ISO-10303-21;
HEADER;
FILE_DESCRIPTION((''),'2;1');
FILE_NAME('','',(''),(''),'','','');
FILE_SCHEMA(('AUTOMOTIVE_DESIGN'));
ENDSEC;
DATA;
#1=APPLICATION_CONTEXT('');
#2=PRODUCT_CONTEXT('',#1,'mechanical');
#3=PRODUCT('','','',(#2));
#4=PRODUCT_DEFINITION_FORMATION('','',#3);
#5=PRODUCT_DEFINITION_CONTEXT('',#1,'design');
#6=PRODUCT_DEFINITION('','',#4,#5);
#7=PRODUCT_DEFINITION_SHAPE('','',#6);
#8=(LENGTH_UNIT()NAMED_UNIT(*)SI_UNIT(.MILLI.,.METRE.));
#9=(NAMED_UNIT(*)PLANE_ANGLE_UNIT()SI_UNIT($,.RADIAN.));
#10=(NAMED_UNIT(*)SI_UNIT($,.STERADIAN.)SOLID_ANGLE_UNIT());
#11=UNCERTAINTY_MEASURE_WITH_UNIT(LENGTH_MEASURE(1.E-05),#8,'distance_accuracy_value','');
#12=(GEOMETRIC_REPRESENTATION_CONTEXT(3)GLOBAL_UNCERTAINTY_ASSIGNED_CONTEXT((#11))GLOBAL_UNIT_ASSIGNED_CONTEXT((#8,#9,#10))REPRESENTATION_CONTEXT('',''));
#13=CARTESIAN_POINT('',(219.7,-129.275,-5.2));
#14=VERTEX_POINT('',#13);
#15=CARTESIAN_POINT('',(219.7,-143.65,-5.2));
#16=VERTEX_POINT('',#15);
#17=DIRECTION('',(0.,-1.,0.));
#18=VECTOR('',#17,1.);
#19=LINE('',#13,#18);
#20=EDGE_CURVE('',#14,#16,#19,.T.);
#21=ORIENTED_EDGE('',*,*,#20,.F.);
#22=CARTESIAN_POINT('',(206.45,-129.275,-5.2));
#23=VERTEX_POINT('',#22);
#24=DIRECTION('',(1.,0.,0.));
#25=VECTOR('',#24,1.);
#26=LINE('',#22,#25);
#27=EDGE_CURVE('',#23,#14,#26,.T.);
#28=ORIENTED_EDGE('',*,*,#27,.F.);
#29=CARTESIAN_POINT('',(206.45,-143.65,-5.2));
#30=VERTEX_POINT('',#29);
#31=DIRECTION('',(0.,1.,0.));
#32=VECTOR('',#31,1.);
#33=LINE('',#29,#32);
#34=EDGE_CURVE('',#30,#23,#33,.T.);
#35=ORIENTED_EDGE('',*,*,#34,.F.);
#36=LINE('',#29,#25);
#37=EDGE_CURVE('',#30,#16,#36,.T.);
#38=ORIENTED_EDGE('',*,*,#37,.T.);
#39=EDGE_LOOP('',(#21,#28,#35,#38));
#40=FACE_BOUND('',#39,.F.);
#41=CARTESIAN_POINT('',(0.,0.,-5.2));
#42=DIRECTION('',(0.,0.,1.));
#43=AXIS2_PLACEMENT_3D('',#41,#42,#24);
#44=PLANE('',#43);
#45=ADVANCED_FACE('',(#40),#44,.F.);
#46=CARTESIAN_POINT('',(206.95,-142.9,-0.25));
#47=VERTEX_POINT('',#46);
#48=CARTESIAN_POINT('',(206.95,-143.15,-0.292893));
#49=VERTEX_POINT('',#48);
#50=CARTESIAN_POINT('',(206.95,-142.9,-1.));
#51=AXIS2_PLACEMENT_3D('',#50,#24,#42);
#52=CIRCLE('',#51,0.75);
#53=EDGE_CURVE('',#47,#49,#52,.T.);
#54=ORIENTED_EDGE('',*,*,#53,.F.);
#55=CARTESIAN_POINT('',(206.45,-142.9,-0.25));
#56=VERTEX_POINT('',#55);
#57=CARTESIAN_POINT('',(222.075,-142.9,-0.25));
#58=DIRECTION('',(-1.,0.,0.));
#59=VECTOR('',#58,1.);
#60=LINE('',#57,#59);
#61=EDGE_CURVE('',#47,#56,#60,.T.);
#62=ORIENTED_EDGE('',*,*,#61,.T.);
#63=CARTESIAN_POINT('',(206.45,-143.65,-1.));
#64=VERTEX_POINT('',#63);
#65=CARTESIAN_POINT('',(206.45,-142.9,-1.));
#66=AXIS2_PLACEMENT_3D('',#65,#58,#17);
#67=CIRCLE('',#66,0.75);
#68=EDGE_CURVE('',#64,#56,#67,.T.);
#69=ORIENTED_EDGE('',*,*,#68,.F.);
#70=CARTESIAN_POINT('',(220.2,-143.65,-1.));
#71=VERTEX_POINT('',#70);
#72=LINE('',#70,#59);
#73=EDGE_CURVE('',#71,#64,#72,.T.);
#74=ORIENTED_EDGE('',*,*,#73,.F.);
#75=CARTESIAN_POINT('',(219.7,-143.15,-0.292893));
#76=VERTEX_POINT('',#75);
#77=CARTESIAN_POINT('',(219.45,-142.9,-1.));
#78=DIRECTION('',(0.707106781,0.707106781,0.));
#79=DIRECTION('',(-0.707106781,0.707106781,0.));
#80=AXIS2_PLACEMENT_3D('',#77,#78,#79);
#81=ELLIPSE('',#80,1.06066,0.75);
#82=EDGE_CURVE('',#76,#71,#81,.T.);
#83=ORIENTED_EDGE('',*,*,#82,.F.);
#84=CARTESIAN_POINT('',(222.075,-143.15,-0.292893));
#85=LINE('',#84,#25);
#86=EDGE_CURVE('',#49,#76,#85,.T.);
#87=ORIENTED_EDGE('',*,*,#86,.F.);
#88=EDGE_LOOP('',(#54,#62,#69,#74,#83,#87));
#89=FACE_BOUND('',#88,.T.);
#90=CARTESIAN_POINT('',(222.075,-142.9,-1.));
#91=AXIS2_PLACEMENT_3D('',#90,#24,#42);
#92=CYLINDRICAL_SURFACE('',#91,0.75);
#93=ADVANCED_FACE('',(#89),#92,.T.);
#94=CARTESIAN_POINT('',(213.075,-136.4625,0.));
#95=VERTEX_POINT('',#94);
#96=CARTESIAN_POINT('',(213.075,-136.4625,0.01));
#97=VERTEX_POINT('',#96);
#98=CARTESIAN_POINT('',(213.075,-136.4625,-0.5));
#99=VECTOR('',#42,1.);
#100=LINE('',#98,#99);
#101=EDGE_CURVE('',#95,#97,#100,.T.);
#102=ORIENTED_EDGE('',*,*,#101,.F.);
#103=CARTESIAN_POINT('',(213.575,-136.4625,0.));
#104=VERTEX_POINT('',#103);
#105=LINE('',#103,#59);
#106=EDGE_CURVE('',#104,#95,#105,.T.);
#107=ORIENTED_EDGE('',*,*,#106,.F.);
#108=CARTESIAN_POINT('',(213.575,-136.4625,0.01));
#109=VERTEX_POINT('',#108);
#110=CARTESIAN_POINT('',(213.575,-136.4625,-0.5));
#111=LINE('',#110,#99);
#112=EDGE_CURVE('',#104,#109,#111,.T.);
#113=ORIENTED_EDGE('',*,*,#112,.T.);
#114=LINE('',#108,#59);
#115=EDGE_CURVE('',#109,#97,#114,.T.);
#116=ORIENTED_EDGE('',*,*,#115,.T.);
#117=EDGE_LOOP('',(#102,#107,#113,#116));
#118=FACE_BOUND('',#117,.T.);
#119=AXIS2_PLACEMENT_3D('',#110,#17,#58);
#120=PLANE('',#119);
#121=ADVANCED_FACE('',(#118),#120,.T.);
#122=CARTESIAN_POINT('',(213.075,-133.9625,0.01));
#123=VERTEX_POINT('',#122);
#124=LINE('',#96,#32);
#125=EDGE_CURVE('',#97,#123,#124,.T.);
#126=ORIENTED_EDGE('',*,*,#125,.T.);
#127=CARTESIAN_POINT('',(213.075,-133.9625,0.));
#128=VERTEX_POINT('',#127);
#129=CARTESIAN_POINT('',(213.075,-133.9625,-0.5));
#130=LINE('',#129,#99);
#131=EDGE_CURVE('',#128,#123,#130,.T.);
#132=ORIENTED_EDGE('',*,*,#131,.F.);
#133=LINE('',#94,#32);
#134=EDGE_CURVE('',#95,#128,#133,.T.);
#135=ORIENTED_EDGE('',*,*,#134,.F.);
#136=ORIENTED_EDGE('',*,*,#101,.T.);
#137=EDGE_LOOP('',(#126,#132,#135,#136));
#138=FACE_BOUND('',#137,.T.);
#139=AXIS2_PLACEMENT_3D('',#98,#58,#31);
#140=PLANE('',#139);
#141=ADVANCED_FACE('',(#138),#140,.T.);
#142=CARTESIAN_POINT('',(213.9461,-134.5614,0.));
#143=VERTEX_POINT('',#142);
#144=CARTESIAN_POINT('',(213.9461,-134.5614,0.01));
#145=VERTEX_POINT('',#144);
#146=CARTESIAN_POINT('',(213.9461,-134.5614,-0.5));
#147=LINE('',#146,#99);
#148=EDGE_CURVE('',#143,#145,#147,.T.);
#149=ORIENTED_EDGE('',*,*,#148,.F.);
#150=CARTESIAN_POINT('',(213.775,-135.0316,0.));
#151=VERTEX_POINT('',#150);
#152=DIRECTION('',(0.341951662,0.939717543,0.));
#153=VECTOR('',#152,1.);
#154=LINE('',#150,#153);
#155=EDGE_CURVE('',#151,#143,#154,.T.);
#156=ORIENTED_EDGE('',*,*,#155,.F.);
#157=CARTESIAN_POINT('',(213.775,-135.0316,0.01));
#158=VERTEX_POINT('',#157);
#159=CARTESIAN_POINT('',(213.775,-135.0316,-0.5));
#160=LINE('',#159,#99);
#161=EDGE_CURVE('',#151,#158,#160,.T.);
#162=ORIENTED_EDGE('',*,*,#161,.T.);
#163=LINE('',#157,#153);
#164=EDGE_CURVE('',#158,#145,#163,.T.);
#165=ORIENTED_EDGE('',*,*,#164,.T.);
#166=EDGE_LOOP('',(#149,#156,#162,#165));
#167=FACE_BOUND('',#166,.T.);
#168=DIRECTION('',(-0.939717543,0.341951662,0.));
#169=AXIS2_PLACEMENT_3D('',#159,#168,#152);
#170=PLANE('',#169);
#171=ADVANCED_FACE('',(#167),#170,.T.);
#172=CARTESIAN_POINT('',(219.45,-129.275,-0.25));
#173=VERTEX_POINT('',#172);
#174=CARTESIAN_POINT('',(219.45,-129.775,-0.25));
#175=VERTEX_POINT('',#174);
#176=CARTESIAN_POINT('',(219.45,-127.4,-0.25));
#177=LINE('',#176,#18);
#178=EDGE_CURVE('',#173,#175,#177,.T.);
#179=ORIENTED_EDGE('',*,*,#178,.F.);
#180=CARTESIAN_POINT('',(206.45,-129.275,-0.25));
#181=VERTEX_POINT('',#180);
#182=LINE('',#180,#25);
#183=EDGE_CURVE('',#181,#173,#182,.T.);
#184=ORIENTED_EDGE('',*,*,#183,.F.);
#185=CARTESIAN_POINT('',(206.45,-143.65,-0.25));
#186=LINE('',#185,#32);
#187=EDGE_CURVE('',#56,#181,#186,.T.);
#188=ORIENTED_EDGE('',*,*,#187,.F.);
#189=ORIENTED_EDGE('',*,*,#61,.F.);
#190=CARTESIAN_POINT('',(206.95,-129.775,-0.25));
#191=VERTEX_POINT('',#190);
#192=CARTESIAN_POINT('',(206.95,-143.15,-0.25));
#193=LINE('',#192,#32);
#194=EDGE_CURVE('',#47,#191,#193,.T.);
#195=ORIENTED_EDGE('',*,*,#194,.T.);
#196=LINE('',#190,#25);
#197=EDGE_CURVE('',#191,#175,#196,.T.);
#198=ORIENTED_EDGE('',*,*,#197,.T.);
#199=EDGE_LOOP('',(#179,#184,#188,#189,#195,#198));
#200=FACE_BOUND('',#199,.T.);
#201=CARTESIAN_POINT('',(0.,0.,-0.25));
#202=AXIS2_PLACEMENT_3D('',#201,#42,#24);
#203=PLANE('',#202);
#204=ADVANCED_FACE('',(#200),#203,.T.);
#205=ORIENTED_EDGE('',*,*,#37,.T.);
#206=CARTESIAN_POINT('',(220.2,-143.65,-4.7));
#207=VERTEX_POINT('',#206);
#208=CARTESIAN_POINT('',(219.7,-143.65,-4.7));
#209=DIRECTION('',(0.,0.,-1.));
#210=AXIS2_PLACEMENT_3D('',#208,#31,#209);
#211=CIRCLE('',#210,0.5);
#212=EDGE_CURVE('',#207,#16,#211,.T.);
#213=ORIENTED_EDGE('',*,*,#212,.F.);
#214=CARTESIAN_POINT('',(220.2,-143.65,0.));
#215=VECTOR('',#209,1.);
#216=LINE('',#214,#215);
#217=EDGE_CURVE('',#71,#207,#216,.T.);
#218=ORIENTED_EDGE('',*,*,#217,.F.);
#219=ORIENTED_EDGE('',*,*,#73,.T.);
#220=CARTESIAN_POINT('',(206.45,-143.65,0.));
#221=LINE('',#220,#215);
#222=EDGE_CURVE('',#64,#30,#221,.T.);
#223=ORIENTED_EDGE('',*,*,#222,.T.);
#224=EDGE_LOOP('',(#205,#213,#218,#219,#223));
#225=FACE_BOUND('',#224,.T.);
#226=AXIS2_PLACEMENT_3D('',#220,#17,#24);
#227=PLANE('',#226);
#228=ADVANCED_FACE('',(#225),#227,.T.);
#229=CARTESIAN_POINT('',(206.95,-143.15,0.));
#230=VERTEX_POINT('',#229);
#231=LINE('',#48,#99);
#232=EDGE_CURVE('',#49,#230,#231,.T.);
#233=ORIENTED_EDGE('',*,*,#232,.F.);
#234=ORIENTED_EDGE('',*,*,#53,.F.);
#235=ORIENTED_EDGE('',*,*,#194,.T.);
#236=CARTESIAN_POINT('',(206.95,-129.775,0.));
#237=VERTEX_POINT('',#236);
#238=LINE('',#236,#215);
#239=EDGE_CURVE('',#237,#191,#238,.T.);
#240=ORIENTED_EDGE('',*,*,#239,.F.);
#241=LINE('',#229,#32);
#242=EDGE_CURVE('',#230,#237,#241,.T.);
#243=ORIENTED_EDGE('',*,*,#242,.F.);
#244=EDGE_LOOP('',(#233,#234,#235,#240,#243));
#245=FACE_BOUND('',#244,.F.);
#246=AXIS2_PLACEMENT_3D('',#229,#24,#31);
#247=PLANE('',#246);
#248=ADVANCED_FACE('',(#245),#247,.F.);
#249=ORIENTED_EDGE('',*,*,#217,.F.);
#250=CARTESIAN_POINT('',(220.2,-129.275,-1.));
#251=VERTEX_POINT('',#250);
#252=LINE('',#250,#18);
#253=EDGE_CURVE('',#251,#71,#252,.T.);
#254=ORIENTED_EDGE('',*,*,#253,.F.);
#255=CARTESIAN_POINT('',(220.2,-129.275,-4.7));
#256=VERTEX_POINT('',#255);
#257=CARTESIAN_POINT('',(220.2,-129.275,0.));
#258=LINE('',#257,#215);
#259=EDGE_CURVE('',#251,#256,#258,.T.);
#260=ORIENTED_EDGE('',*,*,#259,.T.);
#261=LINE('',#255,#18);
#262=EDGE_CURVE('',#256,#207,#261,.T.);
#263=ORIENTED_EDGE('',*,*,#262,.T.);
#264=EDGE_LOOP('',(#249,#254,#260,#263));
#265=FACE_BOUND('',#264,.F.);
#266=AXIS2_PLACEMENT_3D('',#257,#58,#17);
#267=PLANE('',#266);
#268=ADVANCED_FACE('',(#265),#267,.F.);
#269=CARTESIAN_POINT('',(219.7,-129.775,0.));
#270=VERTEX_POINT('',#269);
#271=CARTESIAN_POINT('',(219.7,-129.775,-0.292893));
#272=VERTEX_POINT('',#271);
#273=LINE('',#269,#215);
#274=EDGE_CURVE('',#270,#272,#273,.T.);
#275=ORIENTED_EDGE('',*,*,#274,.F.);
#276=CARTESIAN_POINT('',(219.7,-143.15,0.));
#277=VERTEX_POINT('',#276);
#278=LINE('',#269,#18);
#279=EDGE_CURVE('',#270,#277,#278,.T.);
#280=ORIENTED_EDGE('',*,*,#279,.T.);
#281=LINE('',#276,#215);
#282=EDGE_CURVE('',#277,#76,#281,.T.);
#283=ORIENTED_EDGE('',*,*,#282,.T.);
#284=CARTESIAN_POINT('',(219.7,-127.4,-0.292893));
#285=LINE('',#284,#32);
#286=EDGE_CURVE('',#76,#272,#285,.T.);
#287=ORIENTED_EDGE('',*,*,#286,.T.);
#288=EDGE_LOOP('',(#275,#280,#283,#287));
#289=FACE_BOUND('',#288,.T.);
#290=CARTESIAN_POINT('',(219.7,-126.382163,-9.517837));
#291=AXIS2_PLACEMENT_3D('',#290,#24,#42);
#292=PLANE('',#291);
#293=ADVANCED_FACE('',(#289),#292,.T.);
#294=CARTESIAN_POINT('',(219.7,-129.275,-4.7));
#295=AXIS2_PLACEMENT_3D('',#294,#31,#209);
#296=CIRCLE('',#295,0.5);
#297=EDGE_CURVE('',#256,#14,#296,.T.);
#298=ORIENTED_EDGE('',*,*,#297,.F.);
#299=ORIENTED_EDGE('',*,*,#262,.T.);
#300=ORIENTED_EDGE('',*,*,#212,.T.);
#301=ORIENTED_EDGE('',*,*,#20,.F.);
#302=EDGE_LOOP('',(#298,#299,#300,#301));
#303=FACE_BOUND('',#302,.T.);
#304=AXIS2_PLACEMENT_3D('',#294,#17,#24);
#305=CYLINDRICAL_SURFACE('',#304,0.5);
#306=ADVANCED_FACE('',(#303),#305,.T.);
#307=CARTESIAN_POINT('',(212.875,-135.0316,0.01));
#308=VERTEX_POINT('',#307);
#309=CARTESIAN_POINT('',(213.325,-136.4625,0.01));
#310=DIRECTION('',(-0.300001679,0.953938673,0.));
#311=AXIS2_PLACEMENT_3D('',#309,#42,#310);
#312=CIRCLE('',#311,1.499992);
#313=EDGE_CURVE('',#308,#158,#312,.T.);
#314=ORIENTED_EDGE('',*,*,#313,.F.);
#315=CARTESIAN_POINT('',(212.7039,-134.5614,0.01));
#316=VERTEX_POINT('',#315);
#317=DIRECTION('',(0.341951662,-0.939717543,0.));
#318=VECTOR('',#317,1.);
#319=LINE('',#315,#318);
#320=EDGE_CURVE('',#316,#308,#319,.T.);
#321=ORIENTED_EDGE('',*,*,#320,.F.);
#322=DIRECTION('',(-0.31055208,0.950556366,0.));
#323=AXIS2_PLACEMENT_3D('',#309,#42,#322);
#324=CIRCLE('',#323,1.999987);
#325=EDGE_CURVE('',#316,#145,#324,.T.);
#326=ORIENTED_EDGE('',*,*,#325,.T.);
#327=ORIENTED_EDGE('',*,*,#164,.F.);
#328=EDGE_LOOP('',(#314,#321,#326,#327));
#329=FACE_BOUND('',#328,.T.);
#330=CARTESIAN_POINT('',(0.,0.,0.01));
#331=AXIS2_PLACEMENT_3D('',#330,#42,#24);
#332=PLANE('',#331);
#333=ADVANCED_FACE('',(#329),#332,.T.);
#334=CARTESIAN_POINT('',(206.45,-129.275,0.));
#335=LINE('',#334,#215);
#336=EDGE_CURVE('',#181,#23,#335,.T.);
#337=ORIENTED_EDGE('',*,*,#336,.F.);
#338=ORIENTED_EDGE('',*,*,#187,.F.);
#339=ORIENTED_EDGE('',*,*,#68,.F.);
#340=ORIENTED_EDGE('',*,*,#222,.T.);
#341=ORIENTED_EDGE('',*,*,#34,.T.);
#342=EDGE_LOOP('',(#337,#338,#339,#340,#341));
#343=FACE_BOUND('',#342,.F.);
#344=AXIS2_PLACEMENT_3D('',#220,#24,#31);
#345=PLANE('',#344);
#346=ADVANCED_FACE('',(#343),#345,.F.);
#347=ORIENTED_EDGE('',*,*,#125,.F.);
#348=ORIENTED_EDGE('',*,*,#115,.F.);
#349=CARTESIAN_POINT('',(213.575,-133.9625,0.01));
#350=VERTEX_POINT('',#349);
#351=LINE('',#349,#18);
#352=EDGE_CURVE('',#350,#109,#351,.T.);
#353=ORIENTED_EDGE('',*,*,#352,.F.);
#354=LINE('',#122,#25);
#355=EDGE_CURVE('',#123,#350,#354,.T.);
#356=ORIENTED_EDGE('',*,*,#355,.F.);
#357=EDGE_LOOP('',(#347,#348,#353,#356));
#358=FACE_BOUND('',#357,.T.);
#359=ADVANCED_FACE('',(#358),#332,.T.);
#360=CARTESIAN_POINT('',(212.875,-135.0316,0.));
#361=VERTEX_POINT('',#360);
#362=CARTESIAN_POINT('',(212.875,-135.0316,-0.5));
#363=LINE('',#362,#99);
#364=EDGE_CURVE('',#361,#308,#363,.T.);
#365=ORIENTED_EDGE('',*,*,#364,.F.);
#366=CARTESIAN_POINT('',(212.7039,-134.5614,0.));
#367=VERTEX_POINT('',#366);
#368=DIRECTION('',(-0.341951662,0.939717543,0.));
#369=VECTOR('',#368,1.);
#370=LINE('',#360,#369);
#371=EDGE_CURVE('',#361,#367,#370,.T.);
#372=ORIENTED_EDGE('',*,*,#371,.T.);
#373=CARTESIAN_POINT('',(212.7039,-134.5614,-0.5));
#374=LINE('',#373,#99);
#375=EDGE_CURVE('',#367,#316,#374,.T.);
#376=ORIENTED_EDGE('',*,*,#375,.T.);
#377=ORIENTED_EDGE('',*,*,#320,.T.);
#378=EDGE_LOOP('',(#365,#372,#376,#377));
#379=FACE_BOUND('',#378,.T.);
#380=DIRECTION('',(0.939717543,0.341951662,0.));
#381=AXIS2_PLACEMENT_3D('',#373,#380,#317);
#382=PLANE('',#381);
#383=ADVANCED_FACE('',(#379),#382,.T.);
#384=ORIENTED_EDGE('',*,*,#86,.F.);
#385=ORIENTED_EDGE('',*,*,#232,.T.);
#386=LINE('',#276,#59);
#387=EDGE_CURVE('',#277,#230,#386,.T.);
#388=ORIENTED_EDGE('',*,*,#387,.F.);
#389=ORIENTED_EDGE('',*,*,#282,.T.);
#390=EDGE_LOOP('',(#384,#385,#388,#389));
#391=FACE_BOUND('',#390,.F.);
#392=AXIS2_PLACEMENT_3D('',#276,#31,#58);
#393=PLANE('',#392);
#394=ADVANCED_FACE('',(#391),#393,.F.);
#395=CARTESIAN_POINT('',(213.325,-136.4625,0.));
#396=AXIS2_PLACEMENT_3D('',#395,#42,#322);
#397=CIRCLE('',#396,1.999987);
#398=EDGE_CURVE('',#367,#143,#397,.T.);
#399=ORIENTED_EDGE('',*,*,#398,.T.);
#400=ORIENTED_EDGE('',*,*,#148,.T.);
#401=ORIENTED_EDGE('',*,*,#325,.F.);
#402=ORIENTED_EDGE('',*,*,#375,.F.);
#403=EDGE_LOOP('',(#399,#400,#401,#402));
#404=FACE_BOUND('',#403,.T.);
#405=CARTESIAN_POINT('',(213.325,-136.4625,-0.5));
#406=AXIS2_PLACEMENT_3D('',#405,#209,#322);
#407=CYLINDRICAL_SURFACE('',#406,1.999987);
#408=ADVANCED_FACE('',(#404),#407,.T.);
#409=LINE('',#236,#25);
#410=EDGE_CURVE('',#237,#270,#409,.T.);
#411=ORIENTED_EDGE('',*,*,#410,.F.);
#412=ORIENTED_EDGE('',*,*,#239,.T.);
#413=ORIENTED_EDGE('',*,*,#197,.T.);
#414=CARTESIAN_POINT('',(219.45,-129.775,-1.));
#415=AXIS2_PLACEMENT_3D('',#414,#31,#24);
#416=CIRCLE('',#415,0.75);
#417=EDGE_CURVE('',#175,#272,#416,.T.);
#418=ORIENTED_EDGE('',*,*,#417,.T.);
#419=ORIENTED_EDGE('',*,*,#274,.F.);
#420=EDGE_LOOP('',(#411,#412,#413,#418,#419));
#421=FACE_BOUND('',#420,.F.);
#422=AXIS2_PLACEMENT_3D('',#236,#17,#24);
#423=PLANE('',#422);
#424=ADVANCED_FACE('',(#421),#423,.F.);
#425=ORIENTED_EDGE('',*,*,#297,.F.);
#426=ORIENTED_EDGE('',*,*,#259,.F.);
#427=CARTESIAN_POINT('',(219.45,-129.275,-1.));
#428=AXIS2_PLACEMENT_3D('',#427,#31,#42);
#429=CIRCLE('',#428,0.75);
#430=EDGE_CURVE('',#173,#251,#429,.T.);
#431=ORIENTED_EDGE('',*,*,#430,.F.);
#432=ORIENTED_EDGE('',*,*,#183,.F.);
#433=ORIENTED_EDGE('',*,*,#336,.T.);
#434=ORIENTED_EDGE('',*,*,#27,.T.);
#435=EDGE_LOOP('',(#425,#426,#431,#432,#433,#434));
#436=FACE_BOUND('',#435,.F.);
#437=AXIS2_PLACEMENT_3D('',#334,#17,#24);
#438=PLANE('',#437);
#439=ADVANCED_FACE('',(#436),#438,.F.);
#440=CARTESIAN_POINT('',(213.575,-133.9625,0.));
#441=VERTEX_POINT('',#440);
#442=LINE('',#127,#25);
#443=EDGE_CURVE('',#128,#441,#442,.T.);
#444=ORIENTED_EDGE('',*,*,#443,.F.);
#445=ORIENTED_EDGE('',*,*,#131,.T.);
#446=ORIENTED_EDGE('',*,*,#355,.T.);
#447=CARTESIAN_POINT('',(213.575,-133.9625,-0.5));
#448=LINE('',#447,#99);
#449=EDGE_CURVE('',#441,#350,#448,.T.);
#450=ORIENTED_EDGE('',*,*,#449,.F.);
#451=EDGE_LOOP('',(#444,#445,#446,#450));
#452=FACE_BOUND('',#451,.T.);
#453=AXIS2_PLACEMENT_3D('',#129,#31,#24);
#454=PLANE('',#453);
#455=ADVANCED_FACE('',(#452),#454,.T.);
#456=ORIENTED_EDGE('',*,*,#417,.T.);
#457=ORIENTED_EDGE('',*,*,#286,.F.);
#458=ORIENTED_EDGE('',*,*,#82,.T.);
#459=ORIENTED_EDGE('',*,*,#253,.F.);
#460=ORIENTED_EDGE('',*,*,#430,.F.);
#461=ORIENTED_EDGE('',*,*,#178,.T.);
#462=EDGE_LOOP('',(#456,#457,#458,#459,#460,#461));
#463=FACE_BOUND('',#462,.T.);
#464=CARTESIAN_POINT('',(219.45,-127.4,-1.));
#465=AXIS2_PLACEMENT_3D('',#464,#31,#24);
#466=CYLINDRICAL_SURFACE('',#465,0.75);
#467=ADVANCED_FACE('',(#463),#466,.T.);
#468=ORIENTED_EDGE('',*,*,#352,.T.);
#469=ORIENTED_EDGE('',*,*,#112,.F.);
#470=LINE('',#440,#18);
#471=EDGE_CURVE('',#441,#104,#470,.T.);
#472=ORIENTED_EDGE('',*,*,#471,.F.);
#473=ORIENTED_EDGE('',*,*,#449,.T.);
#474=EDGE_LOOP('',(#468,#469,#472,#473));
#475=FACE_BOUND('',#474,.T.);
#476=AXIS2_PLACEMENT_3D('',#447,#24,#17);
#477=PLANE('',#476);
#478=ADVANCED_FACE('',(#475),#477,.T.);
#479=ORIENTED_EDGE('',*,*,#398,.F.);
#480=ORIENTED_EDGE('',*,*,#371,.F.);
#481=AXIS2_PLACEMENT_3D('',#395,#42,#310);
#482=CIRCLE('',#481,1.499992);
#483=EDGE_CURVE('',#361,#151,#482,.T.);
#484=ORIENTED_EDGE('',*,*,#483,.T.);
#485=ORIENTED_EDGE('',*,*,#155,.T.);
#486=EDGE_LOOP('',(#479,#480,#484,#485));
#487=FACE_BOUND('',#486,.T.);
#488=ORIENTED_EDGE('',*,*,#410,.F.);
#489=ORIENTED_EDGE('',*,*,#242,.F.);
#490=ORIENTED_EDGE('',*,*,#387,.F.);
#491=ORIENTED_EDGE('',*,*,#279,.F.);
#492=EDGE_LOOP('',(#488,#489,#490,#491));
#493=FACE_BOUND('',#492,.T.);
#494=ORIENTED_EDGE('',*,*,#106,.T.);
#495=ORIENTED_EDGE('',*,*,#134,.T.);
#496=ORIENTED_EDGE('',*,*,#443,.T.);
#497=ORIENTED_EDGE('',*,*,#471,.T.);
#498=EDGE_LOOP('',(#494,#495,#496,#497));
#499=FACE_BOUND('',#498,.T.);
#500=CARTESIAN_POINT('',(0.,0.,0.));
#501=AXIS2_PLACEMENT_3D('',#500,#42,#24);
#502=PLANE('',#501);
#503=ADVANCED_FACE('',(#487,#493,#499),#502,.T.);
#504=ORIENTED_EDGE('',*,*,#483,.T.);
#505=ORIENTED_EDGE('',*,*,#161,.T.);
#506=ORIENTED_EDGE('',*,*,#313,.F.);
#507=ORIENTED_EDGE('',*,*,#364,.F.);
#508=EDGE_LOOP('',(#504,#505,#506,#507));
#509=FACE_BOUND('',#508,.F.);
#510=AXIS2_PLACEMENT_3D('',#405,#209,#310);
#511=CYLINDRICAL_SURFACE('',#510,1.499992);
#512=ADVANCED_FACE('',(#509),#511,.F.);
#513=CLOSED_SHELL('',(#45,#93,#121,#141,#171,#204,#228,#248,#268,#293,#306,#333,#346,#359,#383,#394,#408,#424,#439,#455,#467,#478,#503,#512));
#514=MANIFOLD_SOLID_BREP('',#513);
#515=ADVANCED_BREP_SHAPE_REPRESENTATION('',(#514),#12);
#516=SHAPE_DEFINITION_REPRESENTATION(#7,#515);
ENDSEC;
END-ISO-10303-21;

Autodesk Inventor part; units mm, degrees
ref_plane "YZ Plane" through (0, 0, 0) normal (1, 0, 0) x (0, 1, 0)
ref_plane "XZ Plane" through (0, 0, 0) normal (0, 1, 0) x (-1, 0, 0)
ref_plane "XY Plane" through (0, 0, 0) normal (0, 0, 1) x (1, 0, 0)
sketch "Szkic1" plane through (0, 0, 0) normal (0, 0, 1) x (1, 0, 0)
  line L0 (206.45, -143.65) -> (206.45, -129.275)
  line L1 (206.45, -129.275) -> (220.2, -129.275)
  line L2 (206.45, -143.65) -> (220.2, -143.65)
  line L3 (220.2, -129.275) -> (220.2, -143.65)
extrude "Wyciągnięcie proste1" add sketch "Szkic1" against normal blind 5.2
fillet "Zaokrąglenie1" radius 0.5 1 edges at (220.2, -136.4625, -5.2)
sketch "Szkic2" plane through (0, 0, 0) normal (0, 0, 1) x (1, 0, 0)
  line L0 (206.95, -129.775) -> (219.7, -129.775)
  line L1 (219.7, -129.775) -> (219.7, -143.15)
  line L2 (219.7, -143.15) -> (206.95, -143.15)
  line L3 (206.95, -143.15) -> (206.95, -129.775)
  line L4 (206.45, -129.275) -> (220.2, -129.275) projected
  line L5 (220.2, -129.275) -> (220.2, -143.65) projected
  line L6 (206.45, -129.275) -> (220.2, -129.275)
  line L7 (220.2, -129.275) -> (220.2, -143.65)
  line L8 (220.2, -143.65) -> (206.45, -143.65)
  line L9 (206.45, -143.65) -> (206.45, -129.275)
  point P0 (0, 0)
extrude "Wyciągnięcie proste2" cut sketch "Szkic2" against normal blind 0.25
sketch "Szkic3" plane through (0, 0, 0) normal (0, 0, 1) x (1, 0, 0)
  line L0 (213.075, -133.9625) -> (213.575, -133.9625)
  line L1 (213.575, -133.9625) -> (213.575, -136.4625)
  line L2 (213.575, -136.4625) -> (213.075, -136.4625)
  line L3 (213.075, -136.4625) -> (213.075, -133.9625)
  line L4 (212.875, -134.9835) -> (212.875, -135.0316)
  line L5 (212.875, -135.0316) -> (212.7039, -134.5614)
  line L6 (213.775, -135.0316) -> (213.9461, -134.5614)
  arc A0 (212.7039, -134.5614) -> (213.9461, -134.5614) centre (213.325, -136.4625) ccw
  arc A1 (212.875, -135.0316) -> (213.775, -135.0316) centre (213.325, -136.4625) ccw
  point P0 (0, 0)
extrude "Wyciągnięcie proste3" cut sketch "Szkic3" against normal blind 0.5
sketch "Szkic4" plane through (0, 0, -0.5) normal (0, 0, 1) x (1, 0, 0)
  line L0 (213.075, -133.9625) -> (213.575, -133.9625) projected
  line L1 (213.075, -136.4625) -> (213.075, -133.9625) projected
  line L2 (213.575, -136.4625) -> (213.075, -136.4625) projected
  line L3 (213.575, -133.9625) -> (213.575, -136.4625) projected
  line L4 (212.7039, -134.5614) -> (212.875, -135.0316) projected
  arc A0 (212.7039, -134.5614) -> (213.9461, -134.5614) centre (213.325, -136.4625) ccw projected
  line L5 (213.775, -135.0316) -> (213.9461, -134.5614) projected
  arc A1 (212.875, -135.0316) -> (213.775, -135.0316) centre (213.325, -136.4625) ccw projected
  point P0 (0, 0)
extrude "Wyciągnięcie proste4" add sketch "Szkic4" along normal blind 0.51
fillet "Zaokrąglenie2" radius 0.75 2 edges at (220.2, -136.4625, -0.25) (213.325, -143.65, -0.25)
properties part number "PRZYCISK IO" material "Tworzywo sztuczne, nieprzezroczyste czarne"
